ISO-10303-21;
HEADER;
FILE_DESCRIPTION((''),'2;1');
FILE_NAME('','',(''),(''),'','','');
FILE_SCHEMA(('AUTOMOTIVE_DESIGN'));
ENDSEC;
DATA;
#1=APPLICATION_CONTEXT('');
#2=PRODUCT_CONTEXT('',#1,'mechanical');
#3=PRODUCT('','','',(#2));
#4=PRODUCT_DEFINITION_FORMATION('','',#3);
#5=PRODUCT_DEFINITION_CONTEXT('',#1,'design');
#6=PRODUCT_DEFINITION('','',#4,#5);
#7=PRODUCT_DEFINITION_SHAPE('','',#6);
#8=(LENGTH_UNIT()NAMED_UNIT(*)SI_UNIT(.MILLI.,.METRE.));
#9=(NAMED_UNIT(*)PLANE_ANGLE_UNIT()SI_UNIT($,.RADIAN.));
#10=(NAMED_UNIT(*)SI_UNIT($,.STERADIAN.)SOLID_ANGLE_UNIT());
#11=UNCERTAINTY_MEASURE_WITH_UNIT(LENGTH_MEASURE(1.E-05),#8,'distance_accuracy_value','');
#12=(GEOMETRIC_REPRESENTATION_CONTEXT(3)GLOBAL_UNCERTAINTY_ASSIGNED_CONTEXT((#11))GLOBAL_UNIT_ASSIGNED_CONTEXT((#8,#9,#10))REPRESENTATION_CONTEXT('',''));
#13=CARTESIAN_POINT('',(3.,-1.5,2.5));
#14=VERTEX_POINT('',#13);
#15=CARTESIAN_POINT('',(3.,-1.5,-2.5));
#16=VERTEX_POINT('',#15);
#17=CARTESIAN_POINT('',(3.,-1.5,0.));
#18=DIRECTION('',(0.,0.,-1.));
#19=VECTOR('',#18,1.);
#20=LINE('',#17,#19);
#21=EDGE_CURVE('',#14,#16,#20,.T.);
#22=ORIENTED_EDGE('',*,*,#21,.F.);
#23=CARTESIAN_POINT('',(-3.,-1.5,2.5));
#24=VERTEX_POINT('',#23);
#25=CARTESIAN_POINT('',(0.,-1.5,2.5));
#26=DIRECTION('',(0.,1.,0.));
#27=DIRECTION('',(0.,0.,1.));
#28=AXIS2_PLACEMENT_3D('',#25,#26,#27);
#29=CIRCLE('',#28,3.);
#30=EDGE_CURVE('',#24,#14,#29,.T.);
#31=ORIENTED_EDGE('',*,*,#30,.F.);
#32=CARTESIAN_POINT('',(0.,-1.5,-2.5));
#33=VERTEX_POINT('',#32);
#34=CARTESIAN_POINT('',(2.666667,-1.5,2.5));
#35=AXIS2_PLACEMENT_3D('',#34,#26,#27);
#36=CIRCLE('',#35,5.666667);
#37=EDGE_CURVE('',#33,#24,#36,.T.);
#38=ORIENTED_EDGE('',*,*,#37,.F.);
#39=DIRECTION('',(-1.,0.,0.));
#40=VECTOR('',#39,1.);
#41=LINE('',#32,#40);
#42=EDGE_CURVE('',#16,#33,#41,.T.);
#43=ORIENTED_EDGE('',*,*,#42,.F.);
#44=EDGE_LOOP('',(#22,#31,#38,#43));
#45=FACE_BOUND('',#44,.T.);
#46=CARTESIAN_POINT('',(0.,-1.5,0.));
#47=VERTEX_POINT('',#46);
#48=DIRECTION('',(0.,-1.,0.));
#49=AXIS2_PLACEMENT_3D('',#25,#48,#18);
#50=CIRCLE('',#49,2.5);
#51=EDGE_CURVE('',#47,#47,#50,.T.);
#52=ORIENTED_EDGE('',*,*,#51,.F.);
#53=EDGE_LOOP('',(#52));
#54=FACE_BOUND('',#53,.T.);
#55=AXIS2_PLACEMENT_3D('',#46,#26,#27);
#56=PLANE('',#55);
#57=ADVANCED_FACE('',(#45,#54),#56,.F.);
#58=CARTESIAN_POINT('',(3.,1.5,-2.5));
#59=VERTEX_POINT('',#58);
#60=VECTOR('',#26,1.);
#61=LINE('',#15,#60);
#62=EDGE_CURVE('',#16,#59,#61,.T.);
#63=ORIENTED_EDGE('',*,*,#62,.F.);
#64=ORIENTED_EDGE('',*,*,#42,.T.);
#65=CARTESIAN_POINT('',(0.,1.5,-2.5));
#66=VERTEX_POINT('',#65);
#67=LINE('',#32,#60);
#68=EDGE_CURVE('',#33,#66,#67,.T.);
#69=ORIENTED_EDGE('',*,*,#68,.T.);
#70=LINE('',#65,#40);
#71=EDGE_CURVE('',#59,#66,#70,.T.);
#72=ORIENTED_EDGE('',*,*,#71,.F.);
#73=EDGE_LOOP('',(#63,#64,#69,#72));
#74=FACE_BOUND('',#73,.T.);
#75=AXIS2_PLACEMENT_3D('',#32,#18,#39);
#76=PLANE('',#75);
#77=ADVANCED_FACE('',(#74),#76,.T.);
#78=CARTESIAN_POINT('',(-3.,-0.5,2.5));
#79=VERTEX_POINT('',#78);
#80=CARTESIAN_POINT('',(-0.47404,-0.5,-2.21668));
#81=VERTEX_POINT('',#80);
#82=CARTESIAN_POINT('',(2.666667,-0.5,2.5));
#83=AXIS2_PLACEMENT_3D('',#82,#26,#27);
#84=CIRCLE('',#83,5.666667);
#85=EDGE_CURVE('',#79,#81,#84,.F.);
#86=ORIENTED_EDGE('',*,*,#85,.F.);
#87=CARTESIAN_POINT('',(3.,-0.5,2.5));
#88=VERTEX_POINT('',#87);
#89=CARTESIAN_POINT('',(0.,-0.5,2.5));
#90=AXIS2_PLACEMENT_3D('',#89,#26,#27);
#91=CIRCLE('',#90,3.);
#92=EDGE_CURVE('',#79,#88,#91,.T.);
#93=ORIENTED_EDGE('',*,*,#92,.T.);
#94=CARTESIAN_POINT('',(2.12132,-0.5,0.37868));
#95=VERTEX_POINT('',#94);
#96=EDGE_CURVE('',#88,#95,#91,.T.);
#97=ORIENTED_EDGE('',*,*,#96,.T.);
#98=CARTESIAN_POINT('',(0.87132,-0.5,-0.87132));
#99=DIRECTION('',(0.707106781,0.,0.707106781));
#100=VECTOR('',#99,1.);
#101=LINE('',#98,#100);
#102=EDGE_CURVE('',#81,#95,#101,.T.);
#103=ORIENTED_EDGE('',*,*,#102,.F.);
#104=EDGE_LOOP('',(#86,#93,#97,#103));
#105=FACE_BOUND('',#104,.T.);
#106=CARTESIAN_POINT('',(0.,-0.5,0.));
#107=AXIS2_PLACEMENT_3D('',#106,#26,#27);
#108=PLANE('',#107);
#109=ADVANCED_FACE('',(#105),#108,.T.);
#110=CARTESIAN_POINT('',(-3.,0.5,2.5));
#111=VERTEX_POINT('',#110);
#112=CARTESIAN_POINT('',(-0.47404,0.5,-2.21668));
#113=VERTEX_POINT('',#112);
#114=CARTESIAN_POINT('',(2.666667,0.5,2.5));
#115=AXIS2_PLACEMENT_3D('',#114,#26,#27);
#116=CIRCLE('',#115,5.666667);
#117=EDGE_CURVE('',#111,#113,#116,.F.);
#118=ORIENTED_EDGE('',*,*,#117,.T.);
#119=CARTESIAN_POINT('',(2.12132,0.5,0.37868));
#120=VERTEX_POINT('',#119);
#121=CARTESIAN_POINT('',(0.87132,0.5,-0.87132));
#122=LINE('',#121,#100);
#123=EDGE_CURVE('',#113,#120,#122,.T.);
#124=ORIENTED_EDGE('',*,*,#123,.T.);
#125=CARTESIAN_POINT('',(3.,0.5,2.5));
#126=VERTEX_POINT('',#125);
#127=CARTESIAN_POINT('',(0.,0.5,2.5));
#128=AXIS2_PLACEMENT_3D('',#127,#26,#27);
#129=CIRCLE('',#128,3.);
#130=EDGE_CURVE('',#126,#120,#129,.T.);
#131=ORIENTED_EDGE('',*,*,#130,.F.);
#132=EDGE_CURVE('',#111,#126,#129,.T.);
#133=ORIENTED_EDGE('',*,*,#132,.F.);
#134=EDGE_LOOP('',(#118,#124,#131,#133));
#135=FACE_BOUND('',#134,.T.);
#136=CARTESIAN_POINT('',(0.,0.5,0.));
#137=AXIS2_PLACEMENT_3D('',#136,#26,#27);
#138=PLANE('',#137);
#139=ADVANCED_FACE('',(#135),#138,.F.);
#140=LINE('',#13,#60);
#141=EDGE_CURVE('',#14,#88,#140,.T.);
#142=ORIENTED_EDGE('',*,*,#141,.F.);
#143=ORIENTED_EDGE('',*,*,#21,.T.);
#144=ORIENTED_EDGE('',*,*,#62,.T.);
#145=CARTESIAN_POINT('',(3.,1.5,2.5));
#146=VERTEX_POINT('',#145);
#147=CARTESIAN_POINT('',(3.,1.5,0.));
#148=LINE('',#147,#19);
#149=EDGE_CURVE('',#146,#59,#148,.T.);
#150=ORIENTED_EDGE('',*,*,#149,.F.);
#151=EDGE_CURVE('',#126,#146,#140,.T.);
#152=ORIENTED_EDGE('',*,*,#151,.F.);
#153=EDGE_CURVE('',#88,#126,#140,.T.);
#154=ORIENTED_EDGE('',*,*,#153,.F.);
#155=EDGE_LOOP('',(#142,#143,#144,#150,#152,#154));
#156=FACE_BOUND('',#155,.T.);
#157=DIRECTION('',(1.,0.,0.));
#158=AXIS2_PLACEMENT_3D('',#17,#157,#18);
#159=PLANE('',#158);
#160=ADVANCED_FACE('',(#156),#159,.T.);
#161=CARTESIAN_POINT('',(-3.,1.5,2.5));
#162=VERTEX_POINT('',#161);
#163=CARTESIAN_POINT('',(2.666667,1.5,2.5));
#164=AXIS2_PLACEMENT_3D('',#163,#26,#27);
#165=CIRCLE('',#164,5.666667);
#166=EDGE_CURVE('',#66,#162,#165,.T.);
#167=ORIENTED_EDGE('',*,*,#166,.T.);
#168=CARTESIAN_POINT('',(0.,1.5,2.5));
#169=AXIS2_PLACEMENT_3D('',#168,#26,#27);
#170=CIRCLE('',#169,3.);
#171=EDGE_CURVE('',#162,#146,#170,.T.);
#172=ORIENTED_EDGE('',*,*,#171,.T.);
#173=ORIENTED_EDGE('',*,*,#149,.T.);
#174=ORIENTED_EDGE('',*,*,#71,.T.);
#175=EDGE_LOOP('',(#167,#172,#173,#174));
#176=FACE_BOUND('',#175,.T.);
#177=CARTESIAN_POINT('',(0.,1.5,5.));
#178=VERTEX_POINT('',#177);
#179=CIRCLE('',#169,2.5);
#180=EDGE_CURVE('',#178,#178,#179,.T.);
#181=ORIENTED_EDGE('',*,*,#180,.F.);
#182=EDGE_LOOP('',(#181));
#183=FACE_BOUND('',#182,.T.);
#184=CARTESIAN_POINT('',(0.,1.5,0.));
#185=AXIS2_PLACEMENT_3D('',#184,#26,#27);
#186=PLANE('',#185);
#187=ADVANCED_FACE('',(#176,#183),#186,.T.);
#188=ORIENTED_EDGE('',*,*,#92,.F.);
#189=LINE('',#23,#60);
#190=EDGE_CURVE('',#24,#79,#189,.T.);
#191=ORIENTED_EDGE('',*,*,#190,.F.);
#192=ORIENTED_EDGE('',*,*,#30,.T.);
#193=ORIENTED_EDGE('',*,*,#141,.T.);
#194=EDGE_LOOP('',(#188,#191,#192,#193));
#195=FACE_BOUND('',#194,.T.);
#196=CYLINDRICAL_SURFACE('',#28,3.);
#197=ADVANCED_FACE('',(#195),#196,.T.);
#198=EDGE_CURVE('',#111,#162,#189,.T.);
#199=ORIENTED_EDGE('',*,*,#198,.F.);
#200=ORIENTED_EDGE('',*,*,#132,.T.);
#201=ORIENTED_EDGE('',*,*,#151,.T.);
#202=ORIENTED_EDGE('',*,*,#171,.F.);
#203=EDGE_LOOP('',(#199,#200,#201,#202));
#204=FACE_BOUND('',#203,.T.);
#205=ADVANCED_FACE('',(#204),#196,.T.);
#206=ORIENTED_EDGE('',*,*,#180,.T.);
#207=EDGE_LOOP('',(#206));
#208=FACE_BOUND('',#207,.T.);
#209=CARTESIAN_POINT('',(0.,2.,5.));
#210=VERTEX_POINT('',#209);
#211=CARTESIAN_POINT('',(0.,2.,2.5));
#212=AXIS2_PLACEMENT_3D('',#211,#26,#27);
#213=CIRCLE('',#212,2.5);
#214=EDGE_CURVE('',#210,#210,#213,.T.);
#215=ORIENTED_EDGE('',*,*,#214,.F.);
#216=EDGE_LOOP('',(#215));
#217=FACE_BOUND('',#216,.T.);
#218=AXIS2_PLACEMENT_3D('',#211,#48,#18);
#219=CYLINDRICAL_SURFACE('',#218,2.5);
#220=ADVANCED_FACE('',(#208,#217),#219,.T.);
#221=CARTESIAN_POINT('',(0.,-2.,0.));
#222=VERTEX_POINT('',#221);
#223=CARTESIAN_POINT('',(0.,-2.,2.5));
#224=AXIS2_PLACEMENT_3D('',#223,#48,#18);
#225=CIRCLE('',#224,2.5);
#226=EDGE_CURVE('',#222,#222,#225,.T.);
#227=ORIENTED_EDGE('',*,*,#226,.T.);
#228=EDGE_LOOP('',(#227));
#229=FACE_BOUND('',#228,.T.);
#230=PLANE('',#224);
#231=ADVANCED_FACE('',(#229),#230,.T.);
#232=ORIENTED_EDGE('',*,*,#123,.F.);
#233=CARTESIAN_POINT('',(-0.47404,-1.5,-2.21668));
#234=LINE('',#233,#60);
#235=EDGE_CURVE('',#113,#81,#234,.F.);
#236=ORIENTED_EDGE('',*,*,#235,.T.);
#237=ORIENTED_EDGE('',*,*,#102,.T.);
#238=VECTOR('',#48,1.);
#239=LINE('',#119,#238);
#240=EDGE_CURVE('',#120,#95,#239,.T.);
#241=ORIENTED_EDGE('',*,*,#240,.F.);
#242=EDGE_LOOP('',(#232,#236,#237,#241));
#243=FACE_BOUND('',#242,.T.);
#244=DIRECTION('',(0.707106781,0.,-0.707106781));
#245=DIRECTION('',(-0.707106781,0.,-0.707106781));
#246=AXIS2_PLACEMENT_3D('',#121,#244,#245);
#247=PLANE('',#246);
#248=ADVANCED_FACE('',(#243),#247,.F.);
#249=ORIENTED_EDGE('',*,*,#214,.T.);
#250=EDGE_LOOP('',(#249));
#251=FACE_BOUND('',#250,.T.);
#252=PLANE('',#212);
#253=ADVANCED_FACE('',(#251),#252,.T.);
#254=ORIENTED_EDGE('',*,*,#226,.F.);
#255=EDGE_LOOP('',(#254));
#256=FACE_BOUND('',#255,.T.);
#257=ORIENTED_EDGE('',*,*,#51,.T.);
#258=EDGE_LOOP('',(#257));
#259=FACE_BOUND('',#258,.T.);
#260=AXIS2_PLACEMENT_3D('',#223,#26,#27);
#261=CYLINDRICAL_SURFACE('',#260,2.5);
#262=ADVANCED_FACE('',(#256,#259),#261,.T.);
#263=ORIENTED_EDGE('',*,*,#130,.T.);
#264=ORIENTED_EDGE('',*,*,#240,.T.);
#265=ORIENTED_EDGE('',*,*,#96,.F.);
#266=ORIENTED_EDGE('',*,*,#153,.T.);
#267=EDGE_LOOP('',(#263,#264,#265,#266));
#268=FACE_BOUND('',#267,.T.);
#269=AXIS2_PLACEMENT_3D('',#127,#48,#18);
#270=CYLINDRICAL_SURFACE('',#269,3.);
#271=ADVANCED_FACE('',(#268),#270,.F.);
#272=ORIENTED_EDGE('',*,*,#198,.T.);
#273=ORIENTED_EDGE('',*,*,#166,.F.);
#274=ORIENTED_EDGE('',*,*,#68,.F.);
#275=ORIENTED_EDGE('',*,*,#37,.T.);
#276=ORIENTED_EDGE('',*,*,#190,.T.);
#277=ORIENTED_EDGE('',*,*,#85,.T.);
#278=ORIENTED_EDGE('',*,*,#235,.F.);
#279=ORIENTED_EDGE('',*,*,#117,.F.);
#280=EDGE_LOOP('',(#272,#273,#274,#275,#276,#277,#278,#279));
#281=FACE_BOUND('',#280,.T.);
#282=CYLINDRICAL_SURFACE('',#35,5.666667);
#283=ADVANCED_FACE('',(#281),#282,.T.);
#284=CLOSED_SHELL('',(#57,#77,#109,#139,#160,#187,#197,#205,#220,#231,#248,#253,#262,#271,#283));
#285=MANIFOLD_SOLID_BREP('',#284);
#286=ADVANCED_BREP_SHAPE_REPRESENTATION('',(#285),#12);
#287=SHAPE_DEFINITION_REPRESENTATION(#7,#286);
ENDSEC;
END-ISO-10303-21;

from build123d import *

# Parameters (mm, degrees)
BOSS_EXTRUDE1_DEPTH      = 1.5
BOSS_EXTRUDE1_DEPTH_BACK = 1.5
CUT_EXTRUDE1_DEPTH       = 0.5
CUT_EXTRUDE1_DEPTH_BACK  = 0.5
SKETCH3_R                = 2.5
BOSS_EXTRUDE2_DEPTH      = 0.5
BOSS_EXTRUDE3_START      = 0.5
SKETCH4_R                = 2.5
BOSS_EXTRUDE3_DEPTH      = 0.5


with BuildPart() as part:
    # Sketch1 → Boss-Extrude1 (new, two sides: drawn at the far end of the back side and taken through both)
    with BuildSketch(Plane(origin=(0, 0, 0), x_dir=(1, 0, 0), z_dir=(0, 1, 0)).offset(-BOSS_EXTRUDE1_DEPTH_BACK)):
        with BuildLine():
            ThreePointArc((0, 2.5), (-2.192459912, 0.415475947), (-3, -2.5))
            ThreePointArc((-3, -2.5), (0, -5.5), (3, -2.5))
            Line((3, -2.5), (3, 2.5))
            Line((3, 2.5), (0, 2.5))
        make_face()
    extrude(amount=BOSS_EXTRUDE1_DEPTH + BOSS_EXTRUDE1_DEPTH_BACK)

    # Sketch2 → Cut-Extrude1 (cut, two sides: drawn at the far end of the back side and taken through both)
    with BuildSketch(Plane(origin=(0, 0, 0), x_dir=(1, 0, 0), z_dir=(0, 1, 0)).offset(-CUT_EXTRUDE1_DEPTH_BACK)):
        with BuildLine():
            Line((-3, 4.742640687), (-3, -2.5))
            ThreePointArc((-3, -2.5), (1.148050297, -5.271638598), (2.121320344, -0.378679656))
            Line((2.121320344, -0.378679656), (-3, 4.742640687))
        make_face()
    extrude(amount=CUT_EXTRUDE1_DEPTH + CUT_EXTRUDE1_DEPTH_BACK, mode=Mode.SUBTRACT)

    # Sketch3 → Boss-Extrude2 (add)
    with BuildSketch(Plane(origin=(0, 1.5, 0), x_dir=(1, 0, 0), z_dir=(0, 1, 0))):
        with Locations((0, -2.5)):
            Circle(SKETCH3_R)
    extrude(amount=BOSS_EXTRUDE2_DEPTH)

    # Sketch4 → Boss-Extrude3 (add)
    with BuildSketch(Plane.XZ.offset(1.5).offset(BOSS_EXTRUDE3_START)):
        with Locations((0, 2.5)):
            Circle(SKETCH4_R)
    extrude(amount=-BOSS_EXTRUDE3_DEPTH)


solid = part.part
